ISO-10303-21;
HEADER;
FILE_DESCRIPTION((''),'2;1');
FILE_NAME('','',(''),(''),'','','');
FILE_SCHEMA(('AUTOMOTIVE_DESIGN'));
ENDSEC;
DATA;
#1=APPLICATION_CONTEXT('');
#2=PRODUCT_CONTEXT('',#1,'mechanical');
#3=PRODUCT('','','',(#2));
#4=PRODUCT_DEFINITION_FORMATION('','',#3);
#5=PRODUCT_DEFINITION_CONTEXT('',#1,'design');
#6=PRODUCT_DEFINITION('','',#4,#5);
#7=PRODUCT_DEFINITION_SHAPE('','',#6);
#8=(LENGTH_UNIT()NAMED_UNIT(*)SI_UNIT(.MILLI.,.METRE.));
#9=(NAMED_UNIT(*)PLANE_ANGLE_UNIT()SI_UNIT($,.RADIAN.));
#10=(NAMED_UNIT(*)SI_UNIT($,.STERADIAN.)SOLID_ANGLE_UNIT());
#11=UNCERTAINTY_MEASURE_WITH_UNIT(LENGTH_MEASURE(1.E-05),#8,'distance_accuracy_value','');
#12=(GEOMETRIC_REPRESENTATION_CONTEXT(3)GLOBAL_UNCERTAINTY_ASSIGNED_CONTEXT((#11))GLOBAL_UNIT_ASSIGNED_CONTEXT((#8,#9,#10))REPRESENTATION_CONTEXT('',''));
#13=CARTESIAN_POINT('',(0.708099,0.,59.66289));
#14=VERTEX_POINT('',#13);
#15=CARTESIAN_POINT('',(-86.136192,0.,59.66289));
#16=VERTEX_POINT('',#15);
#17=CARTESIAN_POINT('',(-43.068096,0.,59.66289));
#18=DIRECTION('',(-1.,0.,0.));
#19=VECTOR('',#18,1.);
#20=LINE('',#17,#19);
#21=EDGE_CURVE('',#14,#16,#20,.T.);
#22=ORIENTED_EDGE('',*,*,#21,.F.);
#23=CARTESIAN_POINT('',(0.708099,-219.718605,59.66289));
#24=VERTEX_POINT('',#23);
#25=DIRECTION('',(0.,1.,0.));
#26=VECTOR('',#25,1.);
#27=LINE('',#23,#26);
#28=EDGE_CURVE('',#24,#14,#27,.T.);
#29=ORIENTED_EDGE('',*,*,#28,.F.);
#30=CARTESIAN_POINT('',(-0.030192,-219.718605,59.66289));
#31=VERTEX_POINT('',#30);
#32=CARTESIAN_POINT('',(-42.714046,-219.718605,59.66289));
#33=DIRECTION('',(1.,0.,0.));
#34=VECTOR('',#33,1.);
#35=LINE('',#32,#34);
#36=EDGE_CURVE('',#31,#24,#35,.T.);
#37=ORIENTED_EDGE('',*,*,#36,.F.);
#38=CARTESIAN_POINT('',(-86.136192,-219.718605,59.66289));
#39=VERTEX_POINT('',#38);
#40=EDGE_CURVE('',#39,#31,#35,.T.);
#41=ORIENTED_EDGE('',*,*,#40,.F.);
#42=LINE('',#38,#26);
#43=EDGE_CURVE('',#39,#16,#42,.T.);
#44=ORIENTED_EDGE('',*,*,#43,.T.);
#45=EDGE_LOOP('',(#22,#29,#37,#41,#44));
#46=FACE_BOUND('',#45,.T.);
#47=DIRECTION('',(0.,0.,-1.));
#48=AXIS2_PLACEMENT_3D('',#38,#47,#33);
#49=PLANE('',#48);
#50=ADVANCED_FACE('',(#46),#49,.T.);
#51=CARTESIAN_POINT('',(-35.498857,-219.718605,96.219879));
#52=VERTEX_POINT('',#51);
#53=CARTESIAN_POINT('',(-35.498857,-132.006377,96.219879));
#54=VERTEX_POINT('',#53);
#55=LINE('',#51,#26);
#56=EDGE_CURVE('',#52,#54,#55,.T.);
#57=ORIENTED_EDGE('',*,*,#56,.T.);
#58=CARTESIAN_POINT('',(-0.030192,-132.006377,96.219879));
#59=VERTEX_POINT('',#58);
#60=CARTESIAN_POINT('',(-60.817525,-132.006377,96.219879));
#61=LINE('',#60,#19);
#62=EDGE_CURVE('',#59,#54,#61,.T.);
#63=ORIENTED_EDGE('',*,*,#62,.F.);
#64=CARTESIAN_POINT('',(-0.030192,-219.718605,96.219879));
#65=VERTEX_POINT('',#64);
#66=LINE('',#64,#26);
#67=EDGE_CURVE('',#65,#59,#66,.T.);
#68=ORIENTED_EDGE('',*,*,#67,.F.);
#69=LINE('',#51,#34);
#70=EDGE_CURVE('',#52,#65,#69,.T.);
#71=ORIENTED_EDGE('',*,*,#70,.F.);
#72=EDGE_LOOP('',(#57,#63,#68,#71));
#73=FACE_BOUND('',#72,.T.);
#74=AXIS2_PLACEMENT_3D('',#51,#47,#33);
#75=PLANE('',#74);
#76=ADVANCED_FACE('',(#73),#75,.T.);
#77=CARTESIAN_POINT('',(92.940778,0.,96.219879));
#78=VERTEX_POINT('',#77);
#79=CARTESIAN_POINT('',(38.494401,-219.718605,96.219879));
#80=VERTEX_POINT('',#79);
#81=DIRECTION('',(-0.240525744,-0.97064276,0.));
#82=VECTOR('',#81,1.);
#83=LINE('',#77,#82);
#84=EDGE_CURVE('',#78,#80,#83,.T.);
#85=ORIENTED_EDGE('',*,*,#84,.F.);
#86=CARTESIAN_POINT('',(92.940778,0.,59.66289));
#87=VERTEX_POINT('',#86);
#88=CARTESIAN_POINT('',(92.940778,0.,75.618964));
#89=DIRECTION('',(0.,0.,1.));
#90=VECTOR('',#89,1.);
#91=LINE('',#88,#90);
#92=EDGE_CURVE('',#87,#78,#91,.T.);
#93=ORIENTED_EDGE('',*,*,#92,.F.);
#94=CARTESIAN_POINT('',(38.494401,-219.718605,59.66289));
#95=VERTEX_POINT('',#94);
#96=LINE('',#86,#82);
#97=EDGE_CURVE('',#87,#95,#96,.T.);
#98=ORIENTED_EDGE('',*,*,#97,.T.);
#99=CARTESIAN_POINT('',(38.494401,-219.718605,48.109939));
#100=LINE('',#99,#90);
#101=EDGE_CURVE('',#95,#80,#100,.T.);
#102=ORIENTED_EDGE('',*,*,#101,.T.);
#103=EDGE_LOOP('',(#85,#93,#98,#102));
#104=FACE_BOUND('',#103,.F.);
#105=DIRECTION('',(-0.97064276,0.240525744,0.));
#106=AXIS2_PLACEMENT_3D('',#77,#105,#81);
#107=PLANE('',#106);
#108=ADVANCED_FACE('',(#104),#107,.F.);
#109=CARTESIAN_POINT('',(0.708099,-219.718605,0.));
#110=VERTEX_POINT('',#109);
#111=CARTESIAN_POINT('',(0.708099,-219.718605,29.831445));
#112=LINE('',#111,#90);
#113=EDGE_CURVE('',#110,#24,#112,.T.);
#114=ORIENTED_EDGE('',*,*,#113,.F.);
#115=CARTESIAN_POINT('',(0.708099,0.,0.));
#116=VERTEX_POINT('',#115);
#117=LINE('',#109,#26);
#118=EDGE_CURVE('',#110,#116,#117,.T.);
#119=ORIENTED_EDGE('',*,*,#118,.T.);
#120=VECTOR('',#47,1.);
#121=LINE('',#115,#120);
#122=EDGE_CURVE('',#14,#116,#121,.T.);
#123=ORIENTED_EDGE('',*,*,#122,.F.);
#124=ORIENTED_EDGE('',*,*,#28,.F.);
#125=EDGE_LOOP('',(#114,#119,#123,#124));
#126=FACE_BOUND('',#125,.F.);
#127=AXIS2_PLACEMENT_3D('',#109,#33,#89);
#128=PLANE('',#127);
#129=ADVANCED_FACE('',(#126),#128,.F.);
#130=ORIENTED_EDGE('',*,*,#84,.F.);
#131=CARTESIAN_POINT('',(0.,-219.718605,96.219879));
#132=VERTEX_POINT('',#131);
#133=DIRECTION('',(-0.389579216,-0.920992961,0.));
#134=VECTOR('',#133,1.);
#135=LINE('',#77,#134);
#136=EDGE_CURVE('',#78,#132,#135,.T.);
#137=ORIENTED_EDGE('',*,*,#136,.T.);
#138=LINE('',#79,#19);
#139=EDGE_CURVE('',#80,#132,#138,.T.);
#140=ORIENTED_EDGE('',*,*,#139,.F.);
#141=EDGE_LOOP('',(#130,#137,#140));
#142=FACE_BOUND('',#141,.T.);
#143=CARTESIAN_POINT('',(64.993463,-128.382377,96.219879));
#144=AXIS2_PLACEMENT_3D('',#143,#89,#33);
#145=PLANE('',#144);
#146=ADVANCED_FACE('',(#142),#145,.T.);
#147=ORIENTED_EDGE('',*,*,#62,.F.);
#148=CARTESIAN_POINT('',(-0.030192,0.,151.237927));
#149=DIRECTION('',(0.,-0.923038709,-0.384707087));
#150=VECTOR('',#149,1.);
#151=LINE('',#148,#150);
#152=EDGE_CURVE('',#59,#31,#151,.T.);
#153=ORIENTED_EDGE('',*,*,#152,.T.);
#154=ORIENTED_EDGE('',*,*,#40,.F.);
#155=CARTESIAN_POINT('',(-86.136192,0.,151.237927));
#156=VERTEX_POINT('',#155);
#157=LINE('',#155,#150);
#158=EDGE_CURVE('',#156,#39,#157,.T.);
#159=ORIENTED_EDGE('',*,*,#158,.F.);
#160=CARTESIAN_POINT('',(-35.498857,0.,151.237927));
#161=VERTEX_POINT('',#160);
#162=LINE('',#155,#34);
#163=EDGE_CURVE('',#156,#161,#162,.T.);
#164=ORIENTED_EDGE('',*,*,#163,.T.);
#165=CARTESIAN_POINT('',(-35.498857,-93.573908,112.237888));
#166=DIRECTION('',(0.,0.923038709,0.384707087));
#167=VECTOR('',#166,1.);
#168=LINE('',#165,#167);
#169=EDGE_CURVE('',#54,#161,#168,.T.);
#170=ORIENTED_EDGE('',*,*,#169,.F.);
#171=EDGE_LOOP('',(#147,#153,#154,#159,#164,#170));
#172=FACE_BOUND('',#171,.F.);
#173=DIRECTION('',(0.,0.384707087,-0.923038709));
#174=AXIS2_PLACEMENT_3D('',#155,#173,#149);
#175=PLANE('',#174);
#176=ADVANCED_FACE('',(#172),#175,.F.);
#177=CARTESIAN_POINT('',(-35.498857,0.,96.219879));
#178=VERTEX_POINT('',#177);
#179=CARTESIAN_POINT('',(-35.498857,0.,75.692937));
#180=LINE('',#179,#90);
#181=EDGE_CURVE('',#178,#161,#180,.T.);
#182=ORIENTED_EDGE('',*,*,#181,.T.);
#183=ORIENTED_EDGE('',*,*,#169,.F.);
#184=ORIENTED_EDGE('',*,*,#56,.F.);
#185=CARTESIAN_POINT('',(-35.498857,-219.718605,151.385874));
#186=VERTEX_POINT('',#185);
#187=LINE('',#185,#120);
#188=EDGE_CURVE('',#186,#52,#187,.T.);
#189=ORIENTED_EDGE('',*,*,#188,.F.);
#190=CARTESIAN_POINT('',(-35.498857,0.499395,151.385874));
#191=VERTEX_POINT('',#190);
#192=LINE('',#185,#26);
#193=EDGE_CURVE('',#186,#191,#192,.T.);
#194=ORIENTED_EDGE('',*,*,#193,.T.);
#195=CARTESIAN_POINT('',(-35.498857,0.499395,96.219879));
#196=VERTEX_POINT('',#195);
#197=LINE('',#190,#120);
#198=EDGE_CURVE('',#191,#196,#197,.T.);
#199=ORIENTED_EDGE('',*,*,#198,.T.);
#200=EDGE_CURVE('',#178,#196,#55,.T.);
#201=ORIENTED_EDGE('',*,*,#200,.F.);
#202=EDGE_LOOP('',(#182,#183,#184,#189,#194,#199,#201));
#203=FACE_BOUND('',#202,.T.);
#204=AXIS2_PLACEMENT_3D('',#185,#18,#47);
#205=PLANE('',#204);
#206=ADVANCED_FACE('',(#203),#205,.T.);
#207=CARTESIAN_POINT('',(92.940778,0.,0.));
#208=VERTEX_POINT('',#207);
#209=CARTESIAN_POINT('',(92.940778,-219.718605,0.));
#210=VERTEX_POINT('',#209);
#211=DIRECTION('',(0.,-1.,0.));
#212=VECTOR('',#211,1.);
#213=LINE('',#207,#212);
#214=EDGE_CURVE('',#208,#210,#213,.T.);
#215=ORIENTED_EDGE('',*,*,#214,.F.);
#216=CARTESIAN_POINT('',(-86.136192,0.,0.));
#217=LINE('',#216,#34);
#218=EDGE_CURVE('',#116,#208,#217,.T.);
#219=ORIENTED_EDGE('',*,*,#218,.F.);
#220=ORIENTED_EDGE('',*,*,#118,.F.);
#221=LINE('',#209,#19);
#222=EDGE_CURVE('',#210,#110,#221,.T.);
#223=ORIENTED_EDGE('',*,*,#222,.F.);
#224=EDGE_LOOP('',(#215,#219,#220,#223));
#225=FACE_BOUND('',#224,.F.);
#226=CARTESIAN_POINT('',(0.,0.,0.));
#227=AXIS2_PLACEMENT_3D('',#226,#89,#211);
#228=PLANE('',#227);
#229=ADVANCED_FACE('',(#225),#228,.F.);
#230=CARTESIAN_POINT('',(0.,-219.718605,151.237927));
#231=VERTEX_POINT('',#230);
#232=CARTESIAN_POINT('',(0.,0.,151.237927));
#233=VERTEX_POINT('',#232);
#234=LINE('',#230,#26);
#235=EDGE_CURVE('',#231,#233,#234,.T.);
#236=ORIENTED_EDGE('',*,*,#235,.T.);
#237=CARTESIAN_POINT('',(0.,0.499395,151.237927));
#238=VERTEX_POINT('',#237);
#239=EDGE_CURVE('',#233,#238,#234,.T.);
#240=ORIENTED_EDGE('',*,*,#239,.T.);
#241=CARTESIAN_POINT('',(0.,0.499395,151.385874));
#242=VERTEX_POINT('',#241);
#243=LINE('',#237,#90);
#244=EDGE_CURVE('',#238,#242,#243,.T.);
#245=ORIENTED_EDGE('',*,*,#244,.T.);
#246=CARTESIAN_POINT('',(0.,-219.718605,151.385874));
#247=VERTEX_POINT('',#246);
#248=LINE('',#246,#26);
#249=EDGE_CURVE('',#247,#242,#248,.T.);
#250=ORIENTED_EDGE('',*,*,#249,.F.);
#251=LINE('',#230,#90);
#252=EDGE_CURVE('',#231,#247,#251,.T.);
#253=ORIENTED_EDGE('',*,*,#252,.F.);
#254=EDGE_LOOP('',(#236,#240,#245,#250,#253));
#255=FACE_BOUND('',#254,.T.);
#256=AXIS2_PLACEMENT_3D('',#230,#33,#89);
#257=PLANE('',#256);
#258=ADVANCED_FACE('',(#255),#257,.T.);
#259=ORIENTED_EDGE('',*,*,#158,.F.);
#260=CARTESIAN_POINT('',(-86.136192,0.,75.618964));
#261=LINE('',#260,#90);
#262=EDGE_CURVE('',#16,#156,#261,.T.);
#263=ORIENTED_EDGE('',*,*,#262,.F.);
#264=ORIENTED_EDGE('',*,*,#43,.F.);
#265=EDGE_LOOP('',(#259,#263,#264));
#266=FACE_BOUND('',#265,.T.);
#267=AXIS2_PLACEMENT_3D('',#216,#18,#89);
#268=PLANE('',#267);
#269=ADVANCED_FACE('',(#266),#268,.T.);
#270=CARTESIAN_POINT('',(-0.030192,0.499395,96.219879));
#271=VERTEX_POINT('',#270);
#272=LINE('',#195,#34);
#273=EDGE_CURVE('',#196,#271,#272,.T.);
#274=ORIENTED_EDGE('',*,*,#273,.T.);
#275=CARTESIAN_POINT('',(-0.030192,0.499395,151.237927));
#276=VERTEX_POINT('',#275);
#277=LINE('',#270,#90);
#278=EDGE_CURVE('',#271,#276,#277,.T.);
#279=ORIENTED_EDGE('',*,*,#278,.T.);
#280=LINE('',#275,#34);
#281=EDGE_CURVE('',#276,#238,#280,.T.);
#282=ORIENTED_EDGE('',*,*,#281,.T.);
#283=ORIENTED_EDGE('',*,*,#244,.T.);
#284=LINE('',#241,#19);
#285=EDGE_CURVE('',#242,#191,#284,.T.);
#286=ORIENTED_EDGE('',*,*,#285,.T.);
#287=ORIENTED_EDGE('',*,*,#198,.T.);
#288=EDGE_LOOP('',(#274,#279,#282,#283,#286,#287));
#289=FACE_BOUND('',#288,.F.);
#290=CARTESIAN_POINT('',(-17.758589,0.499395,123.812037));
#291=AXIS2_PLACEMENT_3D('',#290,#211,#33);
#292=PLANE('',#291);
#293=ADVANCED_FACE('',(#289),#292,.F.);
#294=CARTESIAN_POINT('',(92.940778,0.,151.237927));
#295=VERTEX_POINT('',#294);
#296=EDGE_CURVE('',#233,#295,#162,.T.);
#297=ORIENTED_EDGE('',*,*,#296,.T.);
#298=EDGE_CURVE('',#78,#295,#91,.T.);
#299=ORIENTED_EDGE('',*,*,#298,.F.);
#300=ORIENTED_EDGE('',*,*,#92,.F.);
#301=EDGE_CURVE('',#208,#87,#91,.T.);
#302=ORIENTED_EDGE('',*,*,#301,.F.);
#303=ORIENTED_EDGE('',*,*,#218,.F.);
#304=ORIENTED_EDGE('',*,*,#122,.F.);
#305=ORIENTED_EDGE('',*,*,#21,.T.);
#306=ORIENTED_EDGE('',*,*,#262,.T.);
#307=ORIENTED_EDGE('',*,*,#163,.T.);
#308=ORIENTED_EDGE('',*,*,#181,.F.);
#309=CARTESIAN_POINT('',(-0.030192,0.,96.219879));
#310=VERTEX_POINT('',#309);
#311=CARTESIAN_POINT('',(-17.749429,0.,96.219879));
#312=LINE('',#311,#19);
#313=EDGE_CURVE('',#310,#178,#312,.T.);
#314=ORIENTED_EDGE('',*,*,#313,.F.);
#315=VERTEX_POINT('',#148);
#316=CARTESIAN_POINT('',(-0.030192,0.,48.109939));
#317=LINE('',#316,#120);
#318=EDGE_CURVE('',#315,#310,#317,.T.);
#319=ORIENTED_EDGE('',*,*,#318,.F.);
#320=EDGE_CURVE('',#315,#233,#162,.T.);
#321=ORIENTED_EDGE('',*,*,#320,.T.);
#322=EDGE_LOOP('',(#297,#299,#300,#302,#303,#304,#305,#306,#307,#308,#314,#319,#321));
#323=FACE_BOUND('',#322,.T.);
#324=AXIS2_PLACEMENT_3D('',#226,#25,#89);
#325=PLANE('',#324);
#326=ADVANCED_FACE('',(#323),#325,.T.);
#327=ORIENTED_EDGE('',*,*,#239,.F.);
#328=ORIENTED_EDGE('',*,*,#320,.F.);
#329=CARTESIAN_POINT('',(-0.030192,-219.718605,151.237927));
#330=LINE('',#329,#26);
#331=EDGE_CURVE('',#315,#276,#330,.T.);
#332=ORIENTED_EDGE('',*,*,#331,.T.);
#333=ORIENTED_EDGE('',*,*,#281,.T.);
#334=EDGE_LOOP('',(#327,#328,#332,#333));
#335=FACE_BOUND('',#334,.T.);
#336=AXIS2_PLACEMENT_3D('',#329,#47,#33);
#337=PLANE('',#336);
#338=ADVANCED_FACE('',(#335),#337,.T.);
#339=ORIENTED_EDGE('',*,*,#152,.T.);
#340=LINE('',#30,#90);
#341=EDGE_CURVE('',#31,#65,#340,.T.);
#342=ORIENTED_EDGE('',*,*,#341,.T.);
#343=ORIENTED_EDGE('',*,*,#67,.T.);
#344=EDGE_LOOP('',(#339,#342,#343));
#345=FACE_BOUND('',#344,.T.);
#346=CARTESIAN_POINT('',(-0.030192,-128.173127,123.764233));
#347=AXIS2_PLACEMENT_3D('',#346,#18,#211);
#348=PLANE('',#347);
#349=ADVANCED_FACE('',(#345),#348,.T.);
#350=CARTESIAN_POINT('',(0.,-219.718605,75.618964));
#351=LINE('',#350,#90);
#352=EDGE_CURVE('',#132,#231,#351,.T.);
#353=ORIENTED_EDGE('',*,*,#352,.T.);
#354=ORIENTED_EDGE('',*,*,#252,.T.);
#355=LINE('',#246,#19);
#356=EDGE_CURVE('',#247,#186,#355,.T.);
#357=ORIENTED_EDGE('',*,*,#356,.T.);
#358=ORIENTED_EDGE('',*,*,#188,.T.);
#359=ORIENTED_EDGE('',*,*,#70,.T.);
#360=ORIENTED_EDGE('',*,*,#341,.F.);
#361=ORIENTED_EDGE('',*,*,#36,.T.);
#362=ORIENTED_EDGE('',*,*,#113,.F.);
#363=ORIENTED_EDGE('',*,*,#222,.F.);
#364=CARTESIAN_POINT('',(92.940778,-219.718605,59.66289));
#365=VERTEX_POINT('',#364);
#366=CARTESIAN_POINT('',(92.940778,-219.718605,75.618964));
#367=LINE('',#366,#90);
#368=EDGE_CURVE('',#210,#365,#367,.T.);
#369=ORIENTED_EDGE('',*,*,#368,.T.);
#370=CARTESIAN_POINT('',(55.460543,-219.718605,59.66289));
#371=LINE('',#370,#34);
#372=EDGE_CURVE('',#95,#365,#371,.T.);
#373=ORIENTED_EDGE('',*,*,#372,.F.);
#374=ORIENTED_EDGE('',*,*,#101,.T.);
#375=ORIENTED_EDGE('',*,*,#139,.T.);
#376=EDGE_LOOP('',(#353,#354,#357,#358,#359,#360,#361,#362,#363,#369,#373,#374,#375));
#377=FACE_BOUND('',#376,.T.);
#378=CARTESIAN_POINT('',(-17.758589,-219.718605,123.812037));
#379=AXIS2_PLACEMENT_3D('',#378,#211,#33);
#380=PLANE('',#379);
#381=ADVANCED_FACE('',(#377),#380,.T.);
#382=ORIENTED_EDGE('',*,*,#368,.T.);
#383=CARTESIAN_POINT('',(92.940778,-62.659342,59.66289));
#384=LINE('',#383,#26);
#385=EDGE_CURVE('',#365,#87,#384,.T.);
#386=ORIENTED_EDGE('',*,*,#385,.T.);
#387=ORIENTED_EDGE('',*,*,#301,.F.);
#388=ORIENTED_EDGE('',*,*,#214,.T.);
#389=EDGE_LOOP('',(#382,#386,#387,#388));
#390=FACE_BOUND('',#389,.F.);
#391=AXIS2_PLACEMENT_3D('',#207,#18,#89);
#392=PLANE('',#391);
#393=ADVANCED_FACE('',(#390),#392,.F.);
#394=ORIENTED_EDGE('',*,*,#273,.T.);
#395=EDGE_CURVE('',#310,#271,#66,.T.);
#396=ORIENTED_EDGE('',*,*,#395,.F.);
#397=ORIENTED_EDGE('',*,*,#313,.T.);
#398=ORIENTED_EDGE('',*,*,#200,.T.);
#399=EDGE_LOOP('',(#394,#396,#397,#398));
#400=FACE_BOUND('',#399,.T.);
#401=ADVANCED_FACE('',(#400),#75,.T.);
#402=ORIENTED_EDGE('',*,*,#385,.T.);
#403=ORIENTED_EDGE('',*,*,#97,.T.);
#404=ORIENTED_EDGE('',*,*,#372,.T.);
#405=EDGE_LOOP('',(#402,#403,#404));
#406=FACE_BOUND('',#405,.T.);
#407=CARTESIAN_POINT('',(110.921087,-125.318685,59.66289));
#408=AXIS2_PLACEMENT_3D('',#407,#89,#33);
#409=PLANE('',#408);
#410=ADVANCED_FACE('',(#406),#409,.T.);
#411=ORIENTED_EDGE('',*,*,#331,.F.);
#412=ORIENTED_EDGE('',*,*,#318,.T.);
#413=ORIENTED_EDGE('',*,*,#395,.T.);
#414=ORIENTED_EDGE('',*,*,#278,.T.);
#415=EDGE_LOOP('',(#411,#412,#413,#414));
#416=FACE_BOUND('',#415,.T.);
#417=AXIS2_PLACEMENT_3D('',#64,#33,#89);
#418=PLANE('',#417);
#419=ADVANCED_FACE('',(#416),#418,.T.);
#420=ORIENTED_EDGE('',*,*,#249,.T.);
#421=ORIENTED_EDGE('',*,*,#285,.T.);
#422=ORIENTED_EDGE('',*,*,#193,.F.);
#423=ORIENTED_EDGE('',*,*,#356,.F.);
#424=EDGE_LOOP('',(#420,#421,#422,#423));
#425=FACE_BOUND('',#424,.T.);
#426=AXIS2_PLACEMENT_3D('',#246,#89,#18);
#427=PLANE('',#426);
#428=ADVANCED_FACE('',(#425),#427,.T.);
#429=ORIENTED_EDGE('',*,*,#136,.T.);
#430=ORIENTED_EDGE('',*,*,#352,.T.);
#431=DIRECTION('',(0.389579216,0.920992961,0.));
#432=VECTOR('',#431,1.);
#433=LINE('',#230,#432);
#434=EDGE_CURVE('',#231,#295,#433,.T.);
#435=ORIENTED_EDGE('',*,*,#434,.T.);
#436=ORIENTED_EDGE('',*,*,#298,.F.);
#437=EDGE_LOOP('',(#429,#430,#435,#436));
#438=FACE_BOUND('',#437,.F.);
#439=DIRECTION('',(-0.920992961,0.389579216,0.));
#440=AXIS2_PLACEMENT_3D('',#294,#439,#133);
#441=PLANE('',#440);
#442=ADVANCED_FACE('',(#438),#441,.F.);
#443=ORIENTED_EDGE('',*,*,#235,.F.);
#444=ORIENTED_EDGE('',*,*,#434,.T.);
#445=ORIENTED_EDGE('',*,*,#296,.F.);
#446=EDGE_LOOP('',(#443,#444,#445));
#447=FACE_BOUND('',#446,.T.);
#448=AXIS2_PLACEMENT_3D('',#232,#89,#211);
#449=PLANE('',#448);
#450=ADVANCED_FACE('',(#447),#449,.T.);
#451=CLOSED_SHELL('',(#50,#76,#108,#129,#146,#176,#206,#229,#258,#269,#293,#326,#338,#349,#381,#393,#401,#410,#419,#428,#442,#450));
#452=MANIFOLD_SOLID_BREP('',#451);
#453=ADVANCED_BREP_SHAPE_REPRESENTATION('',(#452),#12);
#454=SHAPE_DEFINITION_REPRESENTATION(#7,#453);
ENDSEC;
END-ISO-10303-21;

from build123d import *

# Parameters (mm, degrees)
F0_W      = 92.9407775402
F0_H      = 151.2379273772
F1_DEPTH  = 219.7186052799
F3_DEPTH  = 55.0180487335
F4_DEPTH  = 86.1361920834
F6_DEPTH  = 36.5569889545
F8_DEPTH  = 101.3751477003
F9_W      = 86.8442915817
F9_H      = 59.6628896892
F10_DEPTH = 283.972
F12_DEPTH = 86.106
F14_DEPTH = 220.218


with BuildPart() as f1:
    # F0 (on Front) → F1 (new body)
    with BuildSketch(Plane.XZ):
        with Locations((46.4703887701, 75.6189636886)):
            Rectangle(F0_W, F0_H)
    extrude(amount=F1_DEPTH)

    # F2 (on face) → F3 (cut)
    with BuildSketch(Plane.XY.offset(151.2379273772)):
        Polygon((92.9407775402, -219.7186052799), (92.9407775402, 0), (0, -219.7186052799), align=None)
    extrude(amount=-F3_DEPTH, mode=Mode.SUBTRACT)

    # F4 (add): a face of the model
    f4_faces = [f1.faces().sort_by_distance(p)[0] for p in [
        (0, -109.85930264, 75.6189636886),
    ]]
    extrude(f4_faces, amount=F4_DEPTH)

    # F5 (on face) → F6 (cut)
    with BuildSketch(Plane.XY.offset(96.2198786438)):
        Polygon((158.591479063, 33.0015420914), (92.9407775402, 0), (31.3818752766, -248.4212368727), (158.591479063, -248.4212368727), align=None)
        Polygon((158.591479063, 33.0015420914), (92.9407775402, 0), (92.9407775402, -219.7186052799), (38.4944012231, -219.7186052799), (31.3818752766, -248.4212368727), (158.591479063, -248.4212368727), align=None)
    extrude(amount=-F6_DEPTH, mode=Mode.SUBTRACT)

    # F7 (on face) → F8 (cut)
    with BuildSketch(Plane(origin=(-86.1361920834, 0, 0), x_dir=(0, -1, 0), z_dir=(-1, 0, 0))):
        Polygon((29.3830856681, 269.2216336727), (0, 151.2379273772), (219.7186052799, 151.2379273772), (219.7186052799, 65.060840155), (247.8701323271, 54.019369185), (303.3900067808, 195.5738098548), align=None)
    extrude(amount=-F8_DEPTH, mode=Mode.SUBTRACT)

    # F9 (on face) → F10 (cut)
    with BuildSketch(Plane.XZ.offset(219.7186052799)):
        with Locations((-42.7140462925, 29.8314448446)):
            Rectangle(F9_W, F9_H)
    extrude(amount=-F10_DEPTH, mode=Mode.SUBTRACT)

    # F11 (on face) → F12 (cut)
    with BuildSketch(Plane(origin=(-86.1361920834, 0, 0), x_dir=(0, -1, 0), z_dir=(-1, 0, 0))):
        Polygon((219.7186052799, 151.2379273772), (0, 151.2379273772), (219.7186052799, 59.6628896892), align=None)
    extrude(amount=-F12_DEPTH, mode=Mode.SUBTRACT)

    # F13 (on face) → F14 (join)
    with BuildSketch(Plane.XZ.offset(219.7186052799)):
        Polygon((-35.4988574982, 96.2198786438), (-0.0301920834, 96.2198786438), (-0.0301920834, 151.2379273772), (0, 151.2379273772), (0, 151.3858735561), (-35.4988574982, 151.3858735561), align=None)
    extrude(amount=-F14_DEPTH)


solid = f1.part
